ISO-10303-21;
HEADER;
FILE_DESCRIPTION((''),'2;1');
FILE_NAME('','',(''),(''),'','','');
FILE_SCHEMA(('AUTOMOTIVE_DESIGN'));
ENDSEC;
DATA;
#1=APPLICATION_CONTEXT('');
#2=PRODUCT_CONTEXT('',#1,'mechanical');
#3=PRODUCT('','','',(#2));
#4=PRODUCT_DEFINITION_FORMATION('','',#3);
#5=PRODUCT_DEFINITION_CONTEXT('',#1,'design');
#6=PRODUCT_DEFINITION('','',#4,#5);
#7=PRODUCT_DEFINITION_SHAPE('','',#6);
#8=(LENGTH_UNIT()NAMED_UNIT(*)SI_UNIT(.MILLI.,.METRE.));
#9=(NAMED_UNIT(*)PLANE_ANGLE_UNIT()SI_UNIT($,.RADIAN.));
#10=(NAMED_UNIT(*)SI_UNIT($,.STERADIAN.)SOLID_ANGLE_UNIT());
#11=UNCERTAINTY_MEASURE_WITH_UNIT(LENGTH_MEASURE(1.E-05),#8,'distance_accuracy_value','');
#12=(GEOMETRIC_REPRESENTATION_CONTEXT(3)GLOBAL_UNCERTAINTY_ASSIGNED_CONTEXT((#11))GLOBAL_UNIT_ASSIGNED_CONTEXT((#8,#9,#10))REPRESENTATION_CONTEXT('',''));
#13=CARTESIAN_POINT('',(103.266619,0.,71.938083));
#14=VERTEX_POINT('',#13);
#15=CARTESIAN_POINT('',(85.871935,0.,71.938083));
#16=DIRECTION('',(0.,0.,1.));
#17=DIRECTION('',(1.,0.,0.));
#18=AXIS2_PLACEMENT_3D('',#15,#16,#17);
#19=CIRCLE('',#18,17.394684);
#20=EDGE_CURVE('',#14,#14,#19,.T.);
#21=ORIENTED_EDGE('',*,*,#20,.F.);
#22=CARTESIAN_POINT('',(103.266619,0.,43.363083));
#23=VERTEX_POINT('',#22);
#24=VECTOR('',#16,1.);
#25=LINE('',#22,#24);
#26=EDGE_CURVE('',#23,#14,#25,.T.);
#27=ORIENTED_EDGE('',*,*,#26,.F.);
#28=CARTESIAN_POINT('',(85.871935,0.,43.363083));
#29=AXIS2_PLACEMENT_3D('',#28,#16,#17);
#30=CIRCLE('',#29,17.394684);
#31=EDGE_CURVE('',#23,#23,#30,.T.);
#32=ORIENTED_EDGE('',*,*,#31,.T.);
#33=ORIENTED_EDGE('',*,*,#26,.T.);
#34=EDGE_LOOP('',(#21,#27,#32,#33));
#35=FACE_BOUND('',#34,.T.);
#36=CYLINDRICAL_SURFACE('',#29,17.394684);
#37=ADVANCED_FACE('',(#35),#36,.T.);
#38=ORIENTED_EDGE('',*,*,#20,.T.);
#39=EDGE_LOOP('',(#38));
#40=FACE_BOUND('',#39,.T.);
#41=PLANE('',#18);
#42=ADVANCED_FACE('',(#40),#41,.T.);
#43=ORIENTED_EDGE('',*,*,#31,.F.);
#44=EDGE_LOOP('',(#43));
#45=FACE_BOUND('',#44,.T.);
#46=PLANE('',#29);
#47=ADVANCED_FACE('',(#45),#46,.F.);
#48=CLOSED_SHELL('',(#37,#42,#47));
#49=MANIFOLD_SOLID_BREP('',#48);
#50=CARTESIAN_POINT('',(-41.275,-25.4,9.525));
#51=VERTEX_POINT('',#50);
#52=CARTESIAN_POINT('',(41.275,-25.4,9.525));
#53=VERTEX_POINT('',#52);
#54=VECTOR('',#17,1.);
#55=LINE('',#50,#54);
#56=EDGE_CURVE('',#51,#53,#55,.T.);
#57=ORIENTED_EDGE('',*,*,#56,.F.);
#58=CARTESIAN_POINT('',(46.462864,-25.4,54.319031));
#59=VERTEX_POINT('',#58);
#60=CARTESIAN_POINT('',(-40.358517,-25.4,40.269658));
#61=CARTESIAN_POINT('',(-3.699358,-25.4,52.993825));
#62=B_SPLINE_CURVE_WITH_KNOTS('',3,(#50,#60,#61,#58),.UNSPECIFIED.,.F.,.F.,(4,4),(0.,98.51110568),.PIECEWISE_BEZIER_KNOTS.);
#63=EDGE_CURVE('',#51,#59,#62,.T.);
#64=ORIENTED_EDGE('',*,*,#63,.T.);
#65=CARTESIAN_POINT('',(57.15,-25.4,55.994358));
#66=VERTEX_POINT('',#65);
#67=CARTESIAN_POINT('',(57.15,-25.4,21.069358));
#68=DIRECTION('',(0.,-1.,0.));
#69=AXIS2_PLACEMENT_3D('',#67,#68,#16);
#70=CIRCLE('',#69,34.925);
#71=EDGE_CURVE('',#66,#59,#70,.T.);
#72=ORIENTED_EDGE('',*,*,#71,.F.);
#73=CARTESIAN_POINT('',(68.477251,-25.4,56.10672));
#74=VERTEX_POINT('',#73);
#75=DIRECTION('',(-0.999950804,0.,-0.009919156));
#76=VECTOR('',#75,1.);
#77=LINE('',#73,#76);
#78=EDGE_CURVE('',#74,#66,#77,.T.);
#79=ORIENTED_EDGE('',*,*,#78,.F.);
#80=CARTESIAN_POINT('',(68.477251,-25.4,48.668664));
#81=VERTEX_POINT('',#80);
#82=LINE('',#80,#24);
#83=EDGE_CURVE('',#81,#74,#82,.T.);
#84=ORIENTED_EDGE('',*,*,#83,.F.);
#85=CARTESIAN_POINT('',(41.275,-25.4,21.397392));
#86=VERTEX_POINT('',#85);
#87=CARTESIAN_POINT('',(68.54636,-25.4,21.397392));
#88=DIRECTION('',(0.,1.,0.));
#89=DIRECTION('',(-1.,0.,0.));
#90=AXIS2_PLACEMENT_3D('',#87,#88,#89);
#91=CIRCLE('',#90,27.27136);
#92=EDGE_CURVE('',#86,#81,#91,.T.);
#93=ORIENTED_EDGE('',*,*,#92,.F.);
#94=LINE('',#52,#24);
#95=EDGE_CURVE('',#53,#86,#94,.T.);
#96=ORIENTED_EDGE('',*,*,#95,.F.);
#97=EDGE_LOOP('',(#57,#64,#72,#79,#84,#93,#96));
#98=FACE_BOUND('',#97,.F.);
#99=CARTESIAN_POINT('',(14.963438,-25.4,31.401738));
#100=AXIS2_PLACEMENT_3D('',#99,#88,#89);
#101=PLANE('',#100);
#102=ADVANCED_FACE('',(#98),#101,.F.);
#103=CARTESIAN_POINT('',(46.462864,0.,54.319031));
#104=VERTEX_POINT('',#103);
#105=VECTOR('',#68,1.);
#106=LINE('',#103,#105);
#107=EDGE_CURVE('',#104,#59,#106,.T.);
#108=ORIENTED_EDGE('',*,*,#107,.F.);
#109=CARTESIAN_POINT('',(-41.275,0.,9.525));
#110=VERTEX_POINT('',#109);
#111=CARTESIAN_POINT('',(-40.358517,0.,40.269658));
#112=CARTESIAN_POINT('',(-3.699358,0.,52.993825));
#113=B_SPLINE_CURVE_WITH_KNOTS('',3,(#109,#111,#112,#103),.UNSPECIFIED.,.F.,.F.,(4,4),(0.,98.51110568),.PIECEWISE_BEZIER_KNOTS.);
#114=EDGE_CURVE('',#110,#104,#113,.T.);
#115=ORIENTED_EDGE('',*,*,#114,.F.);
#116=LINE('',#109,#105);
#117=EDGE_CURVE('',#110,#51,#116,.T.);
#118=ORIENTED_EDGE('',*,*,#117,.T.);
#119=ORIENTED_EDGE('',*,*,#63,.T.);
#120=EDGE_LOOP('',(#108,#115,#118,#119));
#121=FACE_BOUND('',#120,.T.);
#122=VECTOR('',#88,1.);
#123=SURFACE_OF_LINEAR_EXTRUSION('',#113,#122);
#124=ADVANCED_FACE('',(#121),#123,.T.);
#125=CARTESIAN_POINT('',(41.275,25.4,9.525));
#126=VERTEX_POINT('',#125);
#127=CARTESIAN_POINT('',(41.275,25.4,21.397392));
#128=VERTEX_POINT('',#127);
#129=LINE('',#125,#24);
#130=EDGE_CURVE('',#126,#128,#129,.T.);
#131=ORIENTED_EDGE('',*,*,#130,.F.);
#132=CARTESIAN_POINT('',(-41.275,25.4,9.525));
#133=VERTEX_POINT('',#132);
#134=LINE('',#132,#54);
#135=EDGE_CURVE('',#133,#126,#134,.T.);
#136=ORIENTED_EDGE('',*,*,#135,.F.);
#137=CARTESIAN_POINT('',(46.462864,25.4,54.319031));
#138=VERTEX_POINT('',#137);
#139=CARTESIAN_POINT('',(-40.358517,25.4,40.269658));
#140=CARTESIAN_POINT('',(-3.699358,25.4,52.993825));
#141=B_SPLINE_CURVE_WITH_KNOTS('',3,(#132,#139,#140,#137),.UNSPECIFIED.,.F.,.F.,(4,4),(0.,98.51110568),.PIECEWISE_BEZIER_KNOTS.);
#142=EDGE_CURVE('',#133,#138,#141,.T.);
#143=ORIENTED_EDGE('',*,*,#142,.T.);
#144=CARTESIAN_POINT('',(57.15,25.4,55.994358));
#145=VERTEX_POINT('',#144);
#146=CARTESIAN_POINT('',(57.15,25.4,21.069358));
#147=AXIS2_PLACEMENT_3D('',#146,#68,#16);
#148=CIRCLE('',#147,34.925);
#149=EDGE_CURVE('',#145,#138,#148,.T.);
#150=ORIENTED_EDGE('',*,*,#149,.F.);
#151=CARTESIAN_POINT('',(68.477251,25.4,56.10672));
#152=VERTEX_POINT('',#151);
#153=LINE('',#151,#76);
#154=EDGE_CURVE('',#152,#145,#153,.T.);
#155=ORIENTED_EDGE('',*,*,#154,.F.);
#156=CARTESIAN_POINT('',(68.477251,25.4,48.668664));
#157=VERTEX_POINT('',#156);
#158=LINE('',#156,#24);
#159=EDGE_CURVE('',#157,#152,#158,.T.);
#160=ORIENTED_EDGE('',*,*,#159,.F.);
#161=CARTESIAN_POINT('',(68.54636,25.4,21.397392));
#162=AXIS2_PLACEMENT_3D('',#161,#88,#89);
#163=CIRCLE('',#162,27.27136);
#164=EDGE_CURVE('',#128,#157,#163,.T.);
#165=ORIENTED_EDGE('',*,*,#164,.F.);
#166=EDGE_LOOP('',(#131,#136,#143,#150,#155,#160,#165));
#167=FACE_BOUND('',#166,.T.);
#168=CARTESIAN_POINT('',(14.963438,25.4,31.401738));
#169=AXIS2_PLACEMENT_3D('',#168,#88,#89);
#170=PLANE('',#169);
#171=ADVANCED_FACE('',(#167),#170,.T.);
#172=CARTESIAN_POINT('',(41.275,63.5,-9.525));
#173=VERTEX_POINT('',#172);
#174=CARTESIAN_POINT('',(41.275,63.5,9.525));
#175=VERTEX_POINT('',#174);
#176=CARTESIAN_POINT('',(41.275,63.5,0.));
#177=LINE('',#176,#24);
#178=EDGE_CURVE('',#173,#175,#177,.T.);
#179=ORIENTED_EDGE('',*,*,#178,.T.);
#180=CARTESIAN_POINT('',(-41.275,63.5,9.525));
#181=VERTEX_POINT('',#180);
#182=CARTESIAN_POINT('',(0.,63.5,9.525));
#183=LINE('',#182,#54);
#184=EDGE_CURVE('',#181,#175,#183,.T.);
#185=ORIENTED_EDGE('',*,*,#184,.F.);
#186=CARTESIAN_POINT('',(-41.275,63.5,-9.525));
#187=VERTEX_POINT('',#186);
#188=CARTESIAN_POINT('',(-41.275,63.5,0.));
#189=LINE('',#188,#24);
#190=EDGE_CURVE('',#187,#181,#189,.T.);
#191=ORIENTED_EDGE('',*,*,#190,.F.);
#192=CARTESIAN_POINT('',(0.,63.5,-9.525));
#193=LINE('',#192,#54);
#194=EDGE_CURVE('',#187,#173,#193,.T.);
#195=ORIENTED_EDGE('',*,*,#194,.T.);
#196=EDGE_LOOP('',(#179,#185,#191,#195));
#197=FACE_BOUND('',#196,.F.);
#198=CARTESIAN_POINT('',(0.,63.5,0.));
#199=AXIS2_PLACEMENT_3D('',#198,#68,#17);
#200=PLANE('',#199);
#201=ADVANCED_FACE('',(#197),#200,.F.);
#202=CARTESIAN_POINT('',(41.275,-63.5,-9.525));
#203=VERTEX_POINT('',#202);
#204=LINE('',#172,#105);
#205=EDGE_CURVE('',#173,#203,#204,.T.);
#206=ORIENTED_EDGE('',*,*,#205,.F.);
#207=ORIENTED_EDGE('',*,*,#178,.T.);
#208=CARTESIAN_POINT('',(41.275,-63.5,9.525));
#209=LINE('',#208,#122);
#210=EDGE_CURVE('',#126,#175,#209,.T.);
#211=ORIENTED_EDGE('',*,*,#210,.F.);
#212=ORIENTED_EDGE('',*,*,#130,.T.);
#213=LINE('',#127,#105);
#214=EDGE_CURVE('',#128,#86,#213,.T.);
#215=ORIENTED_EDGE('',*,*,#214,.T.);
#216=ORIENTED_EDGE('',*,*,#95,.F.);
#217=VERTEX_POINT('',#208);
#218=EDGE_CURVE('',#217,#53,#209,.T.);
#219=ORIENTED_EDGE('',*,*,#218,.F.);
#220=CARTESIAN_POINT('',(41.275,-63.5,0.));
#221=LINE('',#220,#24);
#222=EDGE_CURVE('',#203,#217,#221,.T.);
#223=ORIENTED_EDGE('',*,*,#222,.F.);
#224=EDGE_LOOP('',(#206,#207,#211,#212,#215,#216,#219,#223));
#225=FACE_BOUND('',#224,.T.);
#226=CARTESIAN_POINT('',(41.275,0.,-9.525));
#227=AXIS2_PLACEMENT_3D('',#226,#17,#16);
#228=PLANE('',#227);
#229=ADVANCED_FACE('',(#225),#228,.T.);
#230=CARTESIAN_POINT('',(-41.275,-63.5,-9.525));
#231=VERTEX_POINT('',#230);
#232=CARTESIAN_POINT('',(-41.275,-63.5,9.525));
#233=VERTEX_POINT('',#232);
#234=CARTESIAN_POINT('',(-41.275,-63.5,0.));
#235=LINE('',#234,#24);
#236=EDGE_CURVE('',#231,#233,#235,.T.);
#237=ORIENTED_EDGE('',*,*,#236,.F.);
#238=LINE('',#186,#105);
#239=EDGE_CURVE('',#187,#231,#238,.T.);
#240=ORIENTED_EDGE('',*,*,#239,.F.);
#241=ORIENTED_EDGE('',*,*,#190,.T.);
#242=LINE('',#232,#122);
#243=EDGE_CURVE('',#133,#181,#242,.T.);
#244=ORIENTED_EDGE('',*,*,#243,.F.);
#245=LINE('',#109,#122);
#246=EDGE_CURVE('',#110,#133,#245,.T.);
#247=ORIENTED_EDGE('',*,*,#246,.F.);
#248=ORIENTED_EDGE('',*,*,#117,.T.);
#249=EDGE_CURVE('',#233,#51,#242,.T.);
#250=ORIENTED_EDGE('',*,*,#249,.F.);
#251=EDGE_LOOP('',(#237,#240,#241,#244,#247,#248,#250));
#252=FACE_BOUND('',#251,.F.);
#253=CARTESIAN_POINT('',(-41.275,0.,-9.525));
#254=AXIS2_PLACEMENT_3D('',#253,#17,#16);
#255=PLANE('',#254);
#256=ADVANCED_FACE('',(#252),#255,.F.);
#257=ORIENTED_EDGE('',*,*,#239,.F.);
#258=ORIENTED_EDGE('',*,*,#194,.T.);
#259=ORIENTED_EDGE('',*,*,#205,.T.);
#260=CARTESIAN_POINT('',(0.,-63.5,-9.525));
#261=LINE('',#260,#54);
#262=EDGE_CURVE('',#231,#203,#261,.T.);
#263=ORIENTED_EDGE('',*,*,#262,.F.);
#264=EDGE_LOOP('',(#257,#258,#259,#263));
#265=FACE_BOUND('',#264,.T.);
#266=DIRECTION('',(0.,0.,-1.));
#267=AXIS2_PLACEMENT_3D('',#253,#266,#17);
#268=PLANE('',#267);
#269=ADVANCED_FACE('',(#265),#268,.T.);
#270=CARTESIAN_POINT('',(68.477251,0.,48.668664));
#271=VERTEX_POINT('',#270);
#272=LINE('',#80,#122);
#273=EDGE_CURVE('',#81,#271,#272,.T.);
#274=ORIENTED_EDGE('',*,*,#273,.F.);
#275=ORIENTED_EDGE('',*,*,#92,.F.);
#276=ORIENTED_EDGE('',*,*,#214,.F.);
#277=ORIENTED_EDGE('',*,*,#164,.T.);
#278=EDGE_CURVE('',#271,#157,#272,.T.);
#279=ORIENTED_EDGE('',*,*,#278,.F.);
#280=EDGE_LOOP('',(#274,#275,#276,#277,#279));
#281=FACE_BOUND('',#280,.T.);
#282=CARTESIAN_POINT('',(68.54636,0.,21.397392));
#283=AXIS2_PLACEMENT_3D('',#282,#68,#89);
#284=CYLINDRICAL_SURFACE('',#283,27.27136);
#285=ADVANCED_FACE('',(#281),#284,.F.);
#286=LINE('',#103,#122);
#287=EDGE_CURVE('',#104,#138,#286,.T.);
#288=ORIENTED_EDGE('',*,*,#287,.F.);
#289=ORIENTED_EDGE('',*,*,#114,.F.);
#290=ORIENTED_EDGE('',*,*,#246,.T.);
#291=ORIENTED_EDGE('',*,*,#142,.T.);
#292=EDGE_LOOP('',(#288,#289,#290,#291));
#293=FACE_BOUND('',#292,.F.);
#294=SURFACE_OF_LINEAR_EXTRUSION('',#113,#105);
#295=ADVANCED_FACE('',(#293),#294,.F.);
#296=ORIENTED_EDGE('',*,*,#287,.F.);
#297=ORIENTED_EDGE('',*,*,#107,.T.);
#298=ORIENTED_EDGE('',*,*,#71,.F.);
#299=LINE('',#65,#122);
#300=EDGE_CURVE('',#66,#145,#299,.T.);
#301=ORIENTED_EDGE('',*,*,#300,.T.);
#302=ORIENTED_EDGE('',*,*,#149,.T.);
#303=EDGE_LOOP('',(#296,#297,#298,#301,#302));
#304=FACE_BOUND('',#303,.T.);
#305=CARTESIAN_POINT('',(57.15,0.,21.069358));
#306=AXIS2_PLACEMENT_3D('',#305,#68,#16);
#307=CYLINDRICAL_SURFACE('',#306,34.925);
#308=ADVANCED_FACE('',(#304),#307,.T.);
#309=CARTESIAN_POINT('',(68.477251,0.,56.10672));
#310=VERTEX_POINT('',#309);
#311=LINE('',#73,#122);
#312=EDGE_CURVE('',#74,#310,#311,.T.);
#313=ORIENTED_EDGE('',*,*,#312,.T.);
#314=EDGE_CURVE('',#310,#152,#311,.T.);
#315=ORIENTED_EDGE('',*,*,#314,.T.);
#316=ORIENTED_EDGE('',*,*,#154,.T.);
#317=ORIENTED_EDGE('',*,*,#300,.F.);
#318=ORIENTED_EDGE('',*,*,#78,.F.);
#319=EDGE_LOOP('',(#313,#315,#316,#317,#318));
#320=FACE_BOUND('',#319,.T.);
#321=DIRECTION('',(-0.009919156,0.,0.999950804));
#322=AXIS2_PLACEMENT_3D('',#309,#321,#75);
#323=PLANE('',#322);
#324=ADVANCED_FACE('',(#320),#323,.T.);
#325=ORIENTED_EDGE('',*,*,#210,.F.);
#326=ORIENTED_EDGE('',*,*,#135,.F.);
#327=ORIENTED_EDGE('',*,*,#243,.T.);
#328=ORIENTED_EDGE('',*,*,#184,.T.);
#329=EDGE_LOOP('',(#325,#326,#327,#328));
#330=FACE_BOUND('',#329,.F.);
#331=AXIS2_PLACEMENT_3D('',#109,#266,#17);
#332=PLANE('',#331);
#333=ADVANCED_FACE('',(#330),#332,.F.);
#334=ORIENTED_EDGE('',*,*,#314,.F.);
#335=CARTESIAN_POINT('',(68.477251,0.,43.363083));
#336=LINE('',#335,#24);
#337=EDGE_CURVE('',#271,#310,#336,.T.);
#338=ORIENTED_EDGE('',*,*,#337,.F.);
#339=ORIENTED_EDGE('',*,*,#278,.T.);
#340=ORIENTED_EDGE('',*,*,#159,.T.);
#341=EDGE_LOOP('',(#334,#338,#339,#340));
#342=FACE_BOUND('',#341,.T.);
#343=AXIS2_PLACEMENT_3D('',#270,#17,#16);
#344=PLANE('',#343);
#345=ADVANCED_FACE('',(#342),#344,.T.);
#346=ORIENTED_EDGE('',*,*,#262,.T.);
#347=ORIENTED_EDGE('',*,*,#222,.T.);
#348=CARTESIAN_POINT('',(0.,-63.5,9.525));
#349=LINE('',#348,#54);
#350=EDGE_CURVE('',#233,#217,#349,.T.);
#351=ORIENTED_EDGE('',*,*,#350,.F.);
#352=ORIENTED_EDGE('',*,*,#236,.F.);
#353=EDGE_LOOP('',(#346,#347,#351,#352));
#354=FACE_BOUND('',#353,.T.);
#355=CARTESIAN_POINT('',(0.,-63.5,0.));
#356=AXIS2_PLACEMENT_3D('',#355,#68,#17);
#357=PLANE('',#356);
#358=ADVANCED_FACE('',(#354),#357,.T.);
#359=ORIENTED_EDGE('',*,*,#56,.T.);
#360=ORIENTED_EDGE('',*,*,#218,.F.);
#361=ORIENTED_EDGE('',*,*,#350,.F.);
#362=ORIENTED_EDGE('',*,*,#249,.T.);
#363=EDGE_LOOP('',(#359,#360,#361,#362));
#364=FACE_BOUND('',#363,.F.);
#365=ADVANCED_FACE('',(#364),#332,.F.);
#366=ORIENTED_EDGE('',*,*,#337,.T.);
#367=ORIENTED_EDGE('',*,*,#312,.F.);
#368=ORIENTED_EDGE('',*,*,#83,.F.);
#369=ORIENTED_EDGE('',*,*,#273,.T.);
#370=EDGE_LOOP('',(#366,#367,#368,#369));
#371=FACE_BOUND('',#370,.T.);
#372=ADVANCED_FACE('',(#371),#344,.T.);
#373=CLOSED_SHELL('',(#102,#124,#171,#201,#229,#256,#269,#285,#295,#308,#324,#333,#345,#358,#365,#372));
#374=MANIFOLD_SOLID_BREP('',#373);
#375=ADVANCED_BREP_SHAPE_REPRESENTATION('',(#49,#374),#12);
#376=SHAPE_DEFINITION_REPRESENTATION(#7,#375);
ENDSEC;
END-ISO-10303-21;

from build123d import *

# Parameters (mm, degrees)
F0_W     = 82.55
F0_H     = 19.05
F1_DEPTH = 63.5
F2_DEPTH = 25.4


# Not quite as in the source:
# - a feature names something its author has since deleted; it is built from what else it names


with BuildPart() as f1:
    # F0 (on Front) → F1 (new body, symmetric)
    with BuildSketch(Plane.XZ):
        Rectangle(F0_W, F0_H)
    extrude(amount=F1_DEPTH, both=True)

    # F0 (on Front) → F2 (join, symmetric)
    with BuildSketch(Plane.XZ):
        with BuildLine():
            add(Edge.make_bspline(
                [(-41.275, 9.525), (-40.358517319, 40.2696579695), (-3.6993576345, 52.9938253489), (46.4628638043, 54.3190308219)],
                knots=[0, 0, 0, 0, 98.5111056796, 98.5111056796, 98.5111056796, 98.5111056796], degree=3))
            Line((-41.275, 9.525), (41.275, 9.525))
            Line((41.275, 9.525), (41.275, 21.3973916233))
            ThreePointArc((41.275, 21.3973916233), (49.2381780267, 40.6567058334), (68.4772506356, 48.6686639759))
            Line((68.4772506356, 48.6686639759), (68.4772506356, 56.1067202576))
            Line((68.4772506356, 56.1067202576), (57.15, 55.9943579674))
            ThreePointArc((57.15, 55.9943579674), (51.741173854, 55.5729842221), (46.4628638043, 54.3190308219))
        make_face()
    extrude(amount=F2_DEPTH, both=True)

    # F0 (on Front) → F3 (revolve)
    with BuildSketch(Plane.XZ):
        Polygon((85.8719348907, 55.5244293195), (85.8719348907, 43.363083154), (103.2666191459, 43.363083154), (103.2666191459, 71.938083154), (85.8719348907, 71.938083154), align=None)
    revolve(axis=Axis((85.8719348907, 0, 57.650583154), (0, 0, 1)))


solid = f1.part
